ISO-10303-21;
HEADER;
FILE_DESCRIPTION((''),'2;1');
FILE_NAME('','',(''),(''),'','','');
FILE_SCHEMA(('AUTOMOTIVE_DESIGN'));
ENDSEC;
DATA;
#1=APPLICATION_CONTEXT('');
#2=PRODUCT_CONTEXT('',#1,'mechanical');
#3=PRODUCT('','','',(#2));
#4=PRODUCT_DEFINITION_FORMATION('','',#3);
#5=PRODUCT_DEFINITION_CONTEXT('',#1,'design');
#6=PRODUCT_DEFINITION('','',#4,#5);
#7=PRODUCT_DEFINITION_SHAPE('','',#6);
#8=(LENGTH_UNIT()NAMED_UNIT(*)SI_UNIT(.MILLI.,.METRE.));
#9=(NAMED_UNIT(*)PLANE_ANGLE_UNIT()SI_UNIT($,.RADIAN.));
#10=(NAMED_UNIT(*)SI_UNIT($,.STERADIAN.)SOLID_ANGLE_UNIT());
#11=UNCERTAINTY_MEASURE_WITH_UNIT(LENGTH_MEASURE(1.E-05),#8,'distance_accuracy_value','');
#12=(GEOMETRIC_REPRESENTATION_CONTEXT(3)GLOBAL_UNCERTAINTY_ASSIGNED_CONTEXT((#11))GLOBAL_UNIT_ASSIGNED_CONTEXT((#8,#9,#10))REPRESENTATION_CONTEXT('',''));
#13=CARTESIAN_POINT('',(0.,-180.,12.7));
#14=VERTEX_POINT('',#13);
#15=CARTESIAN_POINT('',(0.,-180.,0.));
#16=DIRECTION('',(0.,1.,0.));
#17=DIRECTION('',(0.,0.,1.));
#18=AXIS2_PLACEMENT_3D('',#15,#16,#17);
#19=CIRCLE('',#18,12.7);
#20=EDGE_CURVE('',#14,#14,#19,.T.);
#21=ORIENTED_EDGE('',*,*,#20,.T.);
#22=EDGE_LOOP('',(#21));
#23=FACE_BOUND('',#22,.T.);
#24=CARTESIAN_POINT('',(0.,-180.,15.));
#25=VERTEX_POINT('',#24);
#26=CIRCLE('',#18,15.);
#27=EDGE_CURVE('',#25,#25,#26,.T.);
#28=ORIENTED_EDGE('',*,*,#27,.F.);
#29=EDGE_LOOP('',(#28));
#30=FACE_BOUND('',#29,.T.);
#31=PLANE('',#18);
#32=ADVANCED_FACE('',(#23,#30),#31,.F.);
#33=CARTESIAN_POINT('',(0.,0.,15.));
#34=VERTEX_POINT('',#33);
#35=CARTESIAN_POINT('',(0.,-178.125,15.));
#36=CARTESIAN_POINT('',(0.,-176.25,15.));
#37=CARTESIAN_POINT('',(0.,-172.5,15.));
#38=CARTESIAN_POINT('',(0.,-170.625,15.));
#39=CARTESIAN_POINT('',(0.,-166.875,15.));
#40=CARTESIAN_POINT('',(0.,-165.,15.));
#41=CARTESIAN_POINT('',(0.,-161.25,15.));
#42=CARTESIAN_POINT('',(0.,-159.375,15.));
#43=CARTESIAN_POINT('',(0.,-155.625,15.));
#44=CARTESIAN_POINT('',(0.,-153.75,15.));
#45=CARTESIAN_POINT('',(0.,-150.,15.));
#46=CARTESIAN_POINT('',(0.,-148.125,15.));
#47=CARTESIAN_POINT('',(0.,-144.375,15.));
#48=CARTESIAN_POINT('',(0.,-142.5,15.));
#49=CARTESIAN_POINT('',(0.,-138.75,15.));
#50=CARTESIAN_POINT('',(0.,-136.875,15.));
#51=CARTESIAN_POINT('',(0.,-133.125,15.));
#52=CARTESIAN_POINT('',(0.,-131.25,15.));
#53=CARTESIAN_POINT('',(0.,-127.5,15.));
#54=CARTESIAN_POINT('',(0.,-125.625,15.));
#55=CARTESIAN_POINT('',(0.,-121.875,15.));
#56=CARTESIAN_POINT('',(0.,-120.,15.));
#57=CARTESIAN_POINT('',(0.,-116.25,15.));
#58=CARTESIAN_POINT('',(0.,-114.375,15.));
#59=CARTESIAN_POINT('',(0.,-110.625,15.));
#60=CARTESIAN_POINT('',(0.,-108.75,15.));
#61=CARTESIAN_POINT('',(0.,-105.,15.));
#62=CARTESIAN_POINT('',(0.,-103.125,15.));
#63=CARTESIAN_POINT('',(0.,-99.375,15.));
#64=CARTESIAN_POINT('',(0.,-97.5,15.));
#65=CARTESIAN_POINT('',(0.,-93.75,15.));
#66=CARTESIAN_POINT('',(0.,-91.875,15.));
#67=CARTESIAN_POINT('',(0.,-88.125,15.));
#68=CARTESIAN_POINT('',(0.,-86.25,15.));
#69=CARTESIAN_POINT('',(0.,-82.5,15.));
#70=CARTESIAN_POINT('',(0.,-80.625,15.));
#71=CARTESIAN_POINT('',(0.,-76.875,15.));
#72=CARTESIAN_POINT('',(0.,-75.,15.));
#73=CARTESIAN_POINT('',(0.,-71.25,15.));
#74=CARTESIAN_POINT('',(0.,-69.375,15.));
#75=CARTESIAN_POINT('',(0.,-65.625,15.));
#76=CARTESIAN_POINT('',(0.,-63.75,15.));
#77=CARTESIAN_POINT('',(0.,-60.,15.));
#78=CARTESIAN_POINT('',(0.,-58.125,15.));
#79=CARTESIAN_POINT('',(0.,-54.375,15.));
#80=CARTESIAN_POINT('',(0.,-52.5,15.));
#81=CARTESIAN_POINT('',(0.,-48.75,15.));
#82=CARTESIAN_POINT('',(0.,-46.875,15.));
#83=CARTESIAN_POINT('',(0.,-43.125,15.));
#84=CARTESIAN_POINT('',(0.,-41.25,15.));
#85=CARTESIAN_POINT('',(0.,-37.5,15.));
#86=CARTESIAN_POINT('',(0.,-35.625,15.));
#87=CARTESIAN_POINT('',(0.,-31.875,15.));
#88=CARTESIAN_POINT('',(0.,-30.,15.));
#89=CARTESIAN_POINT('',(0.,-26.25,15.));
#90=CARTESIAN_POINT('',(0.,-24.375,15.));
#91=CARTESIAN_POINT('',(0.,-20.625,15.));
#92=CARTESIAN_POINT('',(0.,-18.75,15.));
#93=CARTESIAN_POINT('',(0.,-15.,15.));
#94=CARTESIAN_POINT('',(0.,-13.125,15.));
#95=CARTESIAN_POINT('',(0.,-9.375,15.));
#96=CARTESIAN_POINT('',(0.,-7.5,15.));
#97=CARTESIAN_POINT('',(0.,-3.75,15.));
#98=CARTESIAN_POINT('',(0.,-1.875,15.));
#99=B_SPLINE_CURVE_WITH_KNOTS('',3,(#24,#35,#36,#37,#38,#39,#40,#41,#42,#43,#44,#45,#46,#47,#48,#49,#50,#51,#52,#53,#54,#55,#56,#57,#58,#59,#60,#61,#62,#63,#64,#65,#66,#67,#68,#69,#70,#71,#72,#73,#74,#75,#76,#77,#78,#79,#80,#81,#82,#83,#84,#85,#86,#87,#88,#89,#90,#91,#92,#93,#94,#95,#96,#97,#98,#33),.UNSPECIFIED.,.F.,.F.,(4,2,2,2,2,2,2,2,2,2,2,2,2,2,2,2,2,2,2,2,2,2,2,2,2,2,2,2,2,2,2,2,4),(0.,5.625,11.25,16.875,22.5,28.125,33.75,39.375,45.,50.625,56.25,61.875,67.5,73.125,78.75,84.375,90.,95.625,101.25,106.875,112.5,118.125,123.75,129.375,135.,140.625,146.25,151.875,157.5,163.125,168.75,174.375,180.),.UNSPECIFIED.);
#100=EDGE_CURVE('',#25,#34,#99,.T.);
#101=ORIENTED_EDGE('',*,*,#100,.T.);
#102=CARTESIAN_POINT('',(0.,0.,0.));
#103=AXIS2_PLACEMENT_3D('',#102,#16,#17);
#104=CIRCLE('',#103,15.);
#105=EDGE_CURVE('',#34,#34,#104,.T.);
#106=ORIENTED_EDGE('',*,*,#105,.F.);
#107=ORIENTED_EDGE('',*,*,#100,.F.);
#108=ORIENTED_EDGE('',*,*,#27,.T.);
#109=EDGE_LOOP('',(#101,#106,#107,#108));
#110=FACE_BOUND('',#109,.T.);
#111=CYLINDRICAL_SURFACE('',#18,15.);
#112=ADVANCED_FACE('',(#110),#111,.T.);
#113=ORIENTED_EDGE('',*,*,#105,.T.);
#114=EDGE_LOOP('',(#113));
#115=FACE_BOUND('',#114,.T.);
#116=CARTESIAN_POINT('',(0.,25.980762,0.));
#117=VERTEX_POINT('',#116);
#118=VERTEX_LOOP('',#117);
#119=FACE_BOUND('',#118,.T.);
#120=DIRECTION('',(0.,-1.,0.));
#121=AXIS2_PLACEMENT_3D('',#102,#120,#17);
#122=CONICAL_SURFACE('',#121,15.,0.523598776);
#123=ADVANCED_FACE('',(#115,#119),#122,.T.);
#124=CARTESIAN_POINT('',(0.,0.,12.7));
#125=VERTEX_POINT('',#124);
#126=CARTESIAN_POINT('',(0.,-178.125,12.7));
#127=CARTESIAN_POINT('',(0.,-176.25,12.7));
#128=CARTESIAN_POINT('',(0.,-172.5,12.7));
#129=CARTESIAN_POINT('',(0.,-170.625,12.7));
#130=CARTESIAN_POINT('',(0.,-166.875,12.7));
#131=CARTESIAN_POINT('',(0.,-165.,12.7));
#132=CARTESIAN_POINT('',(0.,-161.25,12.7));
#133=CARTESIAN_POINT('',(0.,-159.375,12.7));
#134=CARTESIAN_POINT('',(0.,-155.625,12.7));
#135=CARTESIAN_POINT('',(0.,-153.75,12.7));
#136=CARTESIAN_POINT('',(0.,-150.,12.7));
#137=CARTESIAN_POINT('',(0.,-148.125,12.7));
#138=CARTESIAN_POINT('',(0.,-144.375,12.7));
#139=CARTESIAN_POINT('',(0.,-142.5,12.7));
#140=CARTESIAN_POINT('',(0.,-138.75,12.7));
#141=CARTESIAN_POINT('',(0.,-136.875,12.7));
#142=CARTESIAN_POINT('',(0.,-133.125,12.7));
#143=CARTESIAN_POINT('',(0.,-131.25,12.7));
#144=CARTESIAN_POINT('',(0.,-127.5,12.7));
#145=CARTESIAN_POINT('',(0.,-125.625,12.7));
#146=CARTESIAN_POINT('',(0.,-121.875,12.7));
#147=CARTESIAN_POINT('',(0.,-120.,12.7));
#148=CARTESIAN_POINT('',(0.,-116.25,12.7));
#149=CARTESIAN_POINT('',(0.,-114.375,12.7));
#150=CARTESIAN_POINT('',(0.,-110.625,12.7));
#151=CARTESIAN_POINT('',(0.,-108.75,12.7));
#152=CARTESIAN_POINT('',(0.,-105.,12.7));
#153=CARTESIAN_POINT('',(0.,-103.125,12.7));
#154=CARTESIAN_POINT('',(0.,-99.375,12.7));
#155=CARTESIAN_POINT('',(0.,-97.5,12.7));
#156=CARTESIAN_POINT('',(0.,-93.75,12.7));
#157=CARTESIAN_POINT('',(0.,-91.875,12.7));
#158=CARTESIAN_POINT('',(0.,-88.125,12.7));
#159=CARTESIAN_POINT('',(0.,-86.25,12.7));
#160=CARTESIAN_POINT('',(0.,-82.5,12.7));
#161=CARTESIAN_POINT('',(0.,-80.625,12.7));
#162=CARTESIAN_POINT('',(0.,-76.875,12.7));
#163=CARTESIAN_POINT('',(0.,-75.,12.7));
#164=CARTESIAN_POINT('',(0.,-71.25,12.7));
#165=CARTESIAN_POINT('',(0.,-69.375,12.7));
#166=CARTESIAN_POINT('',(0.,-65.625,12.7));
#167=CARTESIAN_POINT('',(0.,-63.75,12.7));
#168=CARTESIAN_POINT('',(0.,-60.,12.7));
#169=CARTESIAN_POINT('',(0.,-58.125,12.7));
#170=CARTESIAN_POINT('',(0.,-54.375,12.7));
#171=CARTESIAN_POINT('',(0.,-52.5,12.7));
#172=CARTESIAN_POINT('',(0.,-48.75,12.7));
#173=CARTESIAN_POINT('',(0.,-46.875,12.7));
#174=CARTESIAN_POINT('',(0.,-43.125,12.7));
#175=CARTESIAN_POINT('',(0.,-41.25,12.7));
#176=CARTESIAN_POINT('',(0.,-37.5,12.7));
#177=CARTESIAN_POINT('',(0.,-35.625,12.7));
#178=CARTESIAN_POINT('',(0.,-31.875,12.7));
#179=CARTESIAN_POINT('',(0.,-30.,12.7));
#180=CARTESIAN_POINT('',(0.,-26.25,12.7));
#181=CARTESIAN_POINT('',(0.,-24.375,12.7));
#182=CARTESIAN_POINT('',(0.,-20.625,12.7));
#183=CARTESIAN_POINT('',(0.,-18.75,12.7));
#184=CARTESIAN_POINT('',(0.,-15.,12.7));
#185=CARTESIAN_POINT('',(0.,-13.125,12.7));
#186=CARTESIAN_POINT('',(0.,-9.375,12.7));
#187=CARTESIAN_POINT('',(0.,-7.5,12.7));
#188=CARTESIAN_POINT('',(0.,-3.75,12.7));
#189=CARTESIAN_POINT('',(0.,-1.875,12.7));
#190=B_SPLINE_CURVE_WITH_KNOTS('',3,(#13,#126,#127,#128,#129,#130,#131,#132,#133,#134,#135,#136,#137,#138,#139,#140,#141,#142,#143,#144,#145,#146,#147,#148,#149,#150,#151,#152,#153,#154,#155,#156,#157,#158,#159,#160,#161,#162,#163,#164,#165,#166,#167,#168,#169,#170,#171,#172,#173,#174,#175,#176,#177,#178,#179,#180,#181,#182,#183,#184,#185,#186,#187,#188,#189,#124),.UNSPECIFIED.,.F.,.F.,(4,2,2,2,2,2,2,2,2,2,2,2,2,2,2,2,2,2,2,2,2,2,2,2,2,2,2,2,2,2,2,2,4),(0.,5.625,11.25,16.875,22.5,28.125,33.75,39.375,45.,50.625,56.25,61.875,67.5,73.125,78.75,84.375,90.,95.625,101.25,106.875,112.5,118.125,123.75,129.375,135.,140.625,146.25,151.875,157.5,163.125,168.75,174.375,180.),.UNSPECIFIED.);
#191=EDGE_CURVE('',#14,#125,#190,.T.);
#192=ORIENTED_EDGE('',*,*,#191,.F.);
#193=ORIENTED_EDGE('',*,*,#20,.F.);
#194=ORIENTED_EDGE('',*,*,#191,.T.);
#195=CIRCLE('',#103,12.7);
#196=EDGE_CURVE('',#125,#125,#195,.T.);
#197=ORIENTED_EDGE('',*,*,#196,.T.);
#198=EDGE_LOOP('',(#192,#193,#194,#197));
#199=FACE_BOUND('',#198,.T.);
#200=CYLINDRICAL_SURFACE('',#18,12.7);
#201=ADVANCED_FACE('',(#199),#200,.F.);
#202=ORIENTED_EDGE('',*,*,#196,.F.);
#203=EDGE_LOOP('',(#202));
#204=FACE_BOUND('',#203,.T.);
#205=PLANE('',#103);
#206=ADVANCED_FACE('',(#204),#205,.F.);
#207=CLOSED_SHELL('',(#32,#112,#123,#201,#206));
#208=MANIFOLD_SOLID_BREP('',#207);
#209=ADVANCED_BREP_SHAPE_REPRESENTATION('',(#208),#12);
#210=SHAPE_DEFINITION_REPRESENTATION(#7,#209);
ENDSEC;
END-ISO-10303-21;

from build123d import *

# Parameters (mm, degrees)
SKETCH1_R           = 15
BOSS_EXTRUDE4_DEPTH = 200
SKETCH1_7_R         = 15
SKETCH1_7_R_2       = 12.7
BOSS_EXTRUDE5_DEPTH = 180


# Read off the part's stored shape, not the designer's step: Draft4
with BuildPart() as part:
    # Sketch1 → Boss-Extrude4 (new body)
    with BuildSketch(Plane(origin=(0, 0, 0), x_dir=(1, 0, 0), z_dir=(0, 1, 0))):
        with Locations(Location((0, 0, 0), (0, 0, 270))):
            Circle(SKETCH1_R)
    extrude(amount=BOSS_EXTRUDE4_DEPTH)

    # Draft4 outline → Draft4 (revolve, cut)
    with BuildSketch(Plane.XY):
        Polygon((15, 0), (15, 200), (0, 200), (0, 25.980762114), align=None)
    revolve(axis=Axis((0, 0, 0), (0, 1, 0)), mode=Mode.SUBTRACT)

    # Sketch1<7> → Boss-Extrude5 (add)
    with BuildSketch(Plane(origin=(0, 0, 0), x_dir=(1, 0, 0), z_dir=(0, 1, 0))):
        with Locations(Location((0, 0, 0), (0, 0, 270))):
            Circle(SKETCH1_7_R)
        with Locations(Location((0, 0, 0), (0, 0, 270))):
            Circle(SKETCH1_7_R_2, mode=Mode.SUBTRACT)
    extrude(amount=-BOSS_EXTRUDE5_DEPTH)


solid = part.part
